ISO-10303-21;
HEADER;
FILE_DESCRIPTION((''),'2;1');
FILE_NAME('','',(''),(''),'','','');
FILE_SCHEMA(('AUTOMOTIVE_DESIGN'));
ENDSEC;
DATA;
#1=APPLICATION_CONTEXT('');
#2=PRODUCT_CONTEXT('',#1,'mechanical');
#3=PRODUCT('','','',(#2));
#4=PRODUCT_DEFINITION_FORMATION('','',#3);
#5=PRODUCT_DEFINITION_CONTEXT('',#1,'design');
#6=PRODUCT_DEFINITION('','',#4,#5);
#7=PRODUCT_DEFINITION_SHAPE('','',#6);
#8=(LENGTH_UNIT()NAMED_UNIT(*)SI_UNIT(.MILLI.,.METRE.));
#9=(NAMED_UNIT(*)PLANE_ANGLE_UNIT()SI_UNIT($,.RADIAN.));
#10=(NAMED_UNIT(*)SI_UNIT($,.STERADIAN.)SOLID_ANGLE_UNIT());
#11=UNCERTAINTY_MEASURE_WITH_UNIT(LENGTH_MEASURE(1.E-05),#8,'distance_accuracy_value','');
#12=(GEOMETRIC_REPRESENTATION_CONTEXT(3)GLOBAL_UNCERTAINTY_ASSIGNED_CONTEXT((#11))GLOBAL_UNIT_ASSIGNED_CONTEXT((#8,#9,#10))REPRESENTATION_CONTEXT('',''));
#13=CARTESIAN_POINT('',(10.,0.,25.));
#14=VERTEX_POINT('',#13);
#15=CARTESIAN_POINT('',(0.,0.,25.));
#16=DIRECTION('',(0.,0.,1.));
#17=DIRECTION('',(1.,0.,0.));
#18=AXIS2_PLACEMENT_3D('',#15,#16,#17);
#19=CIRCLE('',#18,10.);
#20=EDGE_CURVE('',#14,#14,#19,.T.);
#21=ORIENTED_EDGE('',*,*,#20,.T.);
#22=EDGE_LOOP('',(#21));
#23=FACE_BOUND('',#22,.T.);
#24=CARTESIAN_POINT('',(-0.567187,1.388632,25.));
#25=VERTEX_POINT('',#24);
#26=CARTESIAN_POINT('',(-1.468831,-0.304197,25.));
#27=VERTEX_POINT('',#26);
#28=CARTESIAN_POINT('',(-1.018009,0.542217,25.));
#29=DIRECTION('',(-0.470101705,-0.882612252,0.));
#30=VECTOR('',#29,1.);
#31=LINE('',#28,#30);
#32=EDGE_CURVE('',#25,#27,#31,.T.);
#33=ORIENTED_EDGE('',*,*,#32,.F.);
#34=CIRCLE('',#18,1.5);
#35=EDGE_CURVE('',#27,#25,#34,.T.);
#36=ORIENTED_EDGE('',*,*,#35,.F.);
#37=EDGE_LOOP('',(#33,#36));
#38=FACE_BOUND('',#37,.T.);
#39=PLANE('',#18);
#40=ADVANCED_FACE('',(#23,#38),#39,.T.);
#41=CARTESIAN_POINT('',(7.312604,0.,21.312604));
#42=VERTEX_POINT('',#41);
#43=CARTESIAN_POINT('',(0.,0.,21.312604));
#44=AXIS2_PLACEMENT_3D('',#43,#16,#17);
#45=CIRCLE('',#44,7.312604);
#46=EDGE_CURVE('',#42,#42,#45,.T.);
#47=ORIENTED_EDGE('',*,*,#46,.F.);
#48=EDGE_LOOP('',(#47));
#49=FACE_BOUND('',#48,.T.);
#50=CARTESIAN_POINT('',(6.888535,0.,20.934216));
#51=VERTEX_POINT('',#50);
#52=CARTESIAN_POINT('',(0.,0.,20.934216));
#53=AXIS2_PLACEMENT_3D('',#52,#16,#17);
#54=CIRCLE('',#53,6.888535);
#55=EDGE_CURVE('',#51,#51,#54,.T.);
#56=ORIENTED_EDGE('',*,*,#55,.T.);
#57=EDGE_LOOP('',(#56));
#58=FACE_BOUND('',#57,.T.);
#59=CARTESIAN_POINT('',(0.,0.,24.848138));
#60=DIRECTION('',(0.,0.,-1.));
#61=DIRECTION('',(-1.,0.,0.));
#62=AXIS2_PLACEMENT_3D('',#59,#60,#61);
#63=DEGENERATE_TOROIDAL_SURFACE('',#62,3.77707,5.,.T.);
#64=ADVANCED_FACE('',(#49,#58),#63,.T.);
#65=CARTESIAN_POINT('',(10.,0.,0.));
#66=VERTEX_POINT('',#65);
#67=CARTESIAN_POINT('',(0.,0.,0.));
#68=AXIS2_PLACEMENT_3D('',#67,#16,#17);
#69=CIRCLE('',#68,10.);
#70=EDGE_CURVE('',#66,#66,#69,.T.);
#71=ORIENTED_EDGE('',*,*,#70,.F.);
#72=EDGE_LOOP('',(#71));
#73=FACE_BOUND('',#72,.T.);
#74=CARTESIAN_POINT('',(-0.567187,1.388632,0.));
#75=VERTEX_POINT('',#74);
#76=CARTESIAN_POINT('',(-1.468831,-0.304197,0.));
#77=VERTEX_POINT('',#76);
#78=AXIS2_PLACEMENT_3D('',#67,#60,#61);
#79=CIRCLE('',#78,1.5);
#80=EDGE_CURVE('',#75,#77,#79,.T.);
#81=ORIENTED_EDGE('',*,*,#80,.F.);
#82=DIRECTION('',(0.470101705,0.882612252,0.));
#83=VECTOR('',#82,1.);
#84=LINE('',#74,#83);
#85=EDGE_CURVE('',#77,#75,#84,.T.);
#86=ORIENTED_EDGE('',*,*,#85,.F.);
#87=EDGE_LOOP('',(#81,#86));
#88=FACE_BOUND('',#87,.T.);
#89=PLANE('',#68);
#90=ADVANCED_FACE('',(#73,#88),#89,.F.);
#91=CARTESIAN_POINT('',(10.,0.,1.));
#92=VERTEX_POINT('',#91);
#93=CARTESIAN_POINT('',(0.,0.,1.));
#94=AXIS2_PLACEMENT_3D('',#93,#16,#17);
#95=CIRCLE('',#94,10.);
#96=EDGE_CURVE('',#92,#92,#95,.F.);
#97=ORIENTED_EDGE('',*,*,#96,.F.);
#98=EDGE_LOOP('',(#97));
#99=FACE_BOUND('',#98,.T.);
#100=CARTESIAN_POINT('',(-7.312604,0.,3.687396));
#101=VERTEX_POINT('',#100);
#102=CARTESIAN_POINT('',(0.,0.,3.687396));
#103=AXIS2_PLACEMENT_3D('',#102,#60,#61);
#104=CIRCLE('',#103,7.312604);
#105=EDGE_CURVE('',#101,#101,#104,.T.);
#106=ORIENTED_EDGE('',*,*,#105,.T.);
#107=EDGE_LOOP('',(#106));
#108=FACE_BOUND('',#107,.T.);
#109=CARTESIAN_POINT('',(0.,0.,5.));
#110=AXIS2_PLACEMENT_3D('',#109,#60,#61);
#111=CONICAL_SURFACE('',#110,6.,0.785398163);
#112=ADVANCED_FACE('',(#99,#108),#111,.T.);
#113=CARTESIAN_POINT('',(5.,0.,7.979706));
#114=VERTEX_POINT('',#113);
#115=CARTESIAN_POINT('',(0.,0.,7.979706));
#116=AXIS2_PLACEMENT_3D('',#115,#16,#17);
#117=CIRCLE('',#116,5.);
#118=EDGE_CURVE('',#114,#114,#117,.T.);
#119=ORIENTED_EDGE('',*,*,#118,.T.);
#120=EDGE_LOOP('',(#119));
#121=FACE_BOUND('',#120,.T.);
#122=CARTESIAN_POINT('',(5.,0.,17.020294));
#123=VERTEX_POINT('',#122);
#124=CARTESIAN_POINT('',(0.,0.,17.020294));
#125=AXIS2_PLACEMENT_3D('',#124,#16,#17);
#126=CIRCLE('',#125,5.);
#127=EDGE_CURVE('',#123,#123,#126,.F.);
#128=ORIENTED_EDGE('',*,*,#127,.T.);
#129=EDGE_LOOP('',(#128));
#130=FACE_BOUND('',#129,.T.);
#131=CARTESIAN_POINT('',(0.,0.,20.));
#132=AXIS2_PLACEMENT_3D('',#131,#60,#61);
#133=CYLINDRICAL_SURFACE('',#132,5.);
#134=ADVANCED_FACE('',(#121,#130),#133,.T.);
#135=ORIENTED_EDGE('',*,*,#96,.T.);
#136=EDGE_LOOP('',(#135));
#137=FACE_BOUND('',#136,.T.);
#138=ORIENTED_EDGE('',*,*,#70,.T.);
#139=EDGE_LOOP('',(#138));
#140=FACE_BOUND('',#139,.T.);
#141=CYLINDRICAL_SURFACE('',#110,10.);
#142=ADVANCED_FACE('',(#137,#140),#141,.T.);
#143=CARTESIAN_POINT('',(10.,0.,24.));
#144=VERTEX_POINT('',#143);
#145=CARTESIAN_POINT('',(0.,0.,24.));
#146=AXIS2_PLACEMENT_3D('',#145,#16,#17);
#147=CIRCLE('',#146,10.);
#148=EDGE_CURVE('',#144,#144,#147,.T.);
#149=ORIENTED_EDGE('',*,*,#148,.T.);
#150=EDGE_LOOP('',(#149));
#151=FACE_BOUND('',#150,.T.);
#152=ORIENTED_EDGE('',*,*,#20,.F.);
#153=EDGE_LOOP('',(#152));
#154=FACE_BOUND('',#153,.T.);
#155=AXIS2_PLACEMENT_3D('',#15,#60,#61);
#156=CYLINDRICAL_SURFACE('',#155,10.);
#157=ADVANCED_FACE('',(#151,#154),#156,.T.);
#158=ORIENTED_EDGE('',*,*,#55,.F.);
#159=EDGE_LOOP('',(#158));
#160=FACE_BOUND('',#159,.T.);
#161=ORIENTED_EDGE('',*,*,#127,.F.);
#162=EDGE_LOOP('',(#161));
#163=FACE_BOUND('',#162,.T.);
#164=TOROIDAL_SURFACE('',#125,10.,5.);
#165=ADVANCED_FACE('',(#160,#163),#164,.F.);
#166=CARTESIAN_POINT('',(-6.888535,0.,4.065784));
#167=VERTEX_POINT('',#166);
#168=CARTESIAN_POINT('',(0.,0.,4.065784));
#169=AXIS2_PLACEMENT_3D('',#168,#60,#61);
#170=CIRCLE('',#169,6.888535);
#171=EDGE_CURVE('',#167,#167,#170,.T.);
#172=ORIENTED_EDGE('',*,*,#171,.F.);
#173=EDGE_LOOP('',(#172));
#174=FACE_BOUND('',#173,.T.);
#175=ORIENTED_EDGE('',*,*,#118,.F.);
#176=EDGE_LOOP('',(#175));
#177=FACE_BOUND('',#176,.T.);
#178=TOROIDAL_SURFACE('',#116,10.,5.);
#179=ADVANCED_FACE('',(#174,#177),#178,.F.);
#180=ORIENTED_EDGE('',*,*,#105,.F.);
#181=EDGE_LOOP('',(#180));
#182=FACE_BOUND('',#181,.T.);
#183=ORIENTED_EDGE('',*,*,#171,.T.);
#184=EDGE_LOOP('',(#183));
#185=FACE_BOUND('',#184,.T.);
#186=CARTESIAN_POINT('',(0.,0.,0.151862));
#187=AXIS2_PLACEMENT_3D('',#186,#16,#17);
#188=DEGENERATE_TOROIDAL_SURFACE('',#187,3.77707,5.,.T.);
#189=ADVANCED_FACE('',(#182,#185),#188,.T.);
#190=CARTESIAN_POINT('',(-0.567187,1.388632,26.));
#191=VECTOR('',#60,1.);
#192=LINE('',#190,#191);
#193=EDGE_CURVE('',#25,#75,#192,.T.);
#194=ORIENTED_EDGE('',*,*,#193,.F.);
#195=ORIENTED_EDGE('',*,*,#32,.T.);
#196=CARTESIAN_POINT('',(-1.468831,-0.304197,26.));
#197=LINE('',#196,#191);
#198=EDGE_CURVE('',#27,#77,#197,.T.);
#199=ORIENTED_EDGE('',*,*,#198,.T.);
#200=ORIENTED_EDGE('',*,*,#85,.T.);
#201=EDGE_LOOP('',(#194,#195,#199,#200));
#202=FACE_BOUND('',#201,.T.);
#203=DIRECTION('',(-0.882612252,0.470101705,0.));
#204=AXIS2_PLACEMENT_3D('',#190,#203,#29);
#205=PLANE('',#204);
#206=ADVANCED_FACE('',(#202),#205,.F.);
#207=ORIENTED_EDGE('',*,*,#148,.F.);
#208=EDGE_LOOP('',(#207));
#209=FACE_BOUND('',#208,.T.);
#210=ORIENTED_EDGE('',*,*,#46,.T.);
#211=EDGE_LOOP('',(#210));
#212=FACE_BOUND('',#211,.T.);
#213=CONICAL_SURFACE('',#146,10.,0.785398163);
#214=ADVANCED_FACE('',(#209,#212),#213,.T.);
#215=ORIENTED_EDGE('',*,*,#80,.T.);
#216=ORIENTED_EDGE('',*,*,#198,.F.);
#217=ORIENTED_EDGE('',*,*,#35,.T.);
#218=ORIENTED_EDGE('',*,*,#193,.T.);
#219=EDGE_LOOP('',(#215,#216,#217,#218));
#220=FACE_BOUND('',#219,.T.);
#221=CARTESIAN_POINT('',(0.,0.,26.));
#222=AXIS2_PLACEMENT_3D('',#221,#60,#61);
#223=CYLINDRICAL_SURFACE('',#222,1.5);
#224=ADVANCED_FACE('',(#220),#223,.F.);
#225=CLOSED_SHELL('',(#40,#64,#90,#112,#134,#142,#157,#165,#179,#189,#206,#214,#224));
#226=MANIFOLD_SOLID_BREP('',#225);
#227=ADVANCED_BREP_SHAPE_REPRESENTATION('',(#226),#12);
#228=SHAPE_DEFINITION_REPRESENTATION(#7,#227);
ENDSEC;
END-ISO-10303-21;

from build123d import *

# Parameters (mm, degrees)
SKETCH1_R           = 10
BOSS_EXTRUDE1_DEPTH = 5
SKETCH3_R           = 5
BOSS_EXTRUDE3_DEPTH = 15
SKETCH4_R           = 10
BOSS_EXTRUDE4_DEPTH = 5
CUT_EXTRUDE1_DEPTH  = 26
CHAMFER3_SIZE       = 4
FILLET6_R           = 5
FILLET7_R           = 5


with BuildPart() as part:
    # Sketch1 → Boss-Extrude1 (new body)
    with BuildSketch(Plane.XY):
        Circle(SKETCH1_R)
    extrude(amount=BOSS_EXTRUDE1_DEPTH)

    # Sketch3 → Boss-Extrude3 (add)
    with BuildSketch(Plane.XY.offset(5)):
        Circle(SKETCH3_R)
    extrude(amount=BOSS_EXTRUDE3_DEPTH)

    # Sketch4 → Boss-Extrude4 (add)
    with BuildSketch(Plane.XY.offset(20)):
        Circle(SKETCH4_R)
    extrude(amount=BOSS_EXTRUDE4_DEPTH)

    # Sketch5 → Cut-Extrude1 (cut)
    with BuildSketch(Plane(origin=(0, 0, 0), x_dir=(-1, 0, 0), z_dir=(0, 0, -1))):
        with BuildLine():
            Line((0.567187137, 1.388631971), (1.468830879, -0.304197058))
            ThreePointArc((1.468830879, -0.304197058), (-1.323918378, -0.705152558), (0.567187137, 1.388631971))
        make_face()
    extrude(amount=-CUT_EXTRUDE1_DEPTH, mode=Mode.SUBTRACT)

    # Chamfer3
    chamfer3_edges = [part.edges().sort_by_distance(p)[0] for p in [
        (-10, 0, 20),
        (-10, 0, 5),
    ]]
    chamfer(chamfer3_edges, length=CHAMFER3_SIZE)

    # Fillet6
    # the kernel refuses this fillet: 5 mm, written as the material it takes off along each edge
    with BuildSketch(Plane(origin=(0, 0, 20), x_dir=(1, 0, 0), z_dir=(0, -1, 0))) as fillet6_piece_1:
        with BuildLine():
            CenterArc((3.777070272, 4.848138084), FILLET6_R, 284.157365729, 30.842634271)
            Line((5, 0), (5.024458595, -0.096962762))
            ThreePointArc((5.024458595, -0.096962762), (5.5, -0.1), (6, -0.1))
            Line((6, -0.1), (6.070710678, -0.070710678))
            Line((6.070710678, -0.070710678), (7.383314856, 1.2418935))
            Line((7.383314856, 1.2418935), (7.312604178, 1.312604178))
        make_face()
    revolve(axis=Axis((0, 0, 20), (0, 0, 1)), mode=Mode.SUBTRACT)
    with BuildSketch(Plane(origin=(0, 0, 5), x_dir=(1, 0, 0), z_dir=(0, -1, 0))) as fillet6_piece_2:
        with BuildLine():
            CenterArc((3.777070272, -4.848138084), FILLET6_R, 45, 30.842634271)
            Line((7.312604178, -1.312604178), (7.383314856, -1.2418935))
            Line((7.383314856, -1.2418935), (6.070710678, 0.070710678))
            Line((6.070710678, 0.070710678), (6, 0.1))
            ThreePointArc((6, 0.1), (5.5, 0.1), (5.024458595, 0.096962762))
            Line((5.024458595, 0.096962762), (5, 0))
        make_face()
    revolve(axis=Axis((0, 0, 5), (0, 0, 1)), mode=Mode.SUBTRACT)

    # Fillet7
    fillet7_edges = [part.edges().sort_by_distance(p)[0] for p in [
        (-5, 0, 5),
        (-5, 0, 20),
    ]]
    fillet(fillet7_edges, radius=FILLET7_R)


solid = part.part
